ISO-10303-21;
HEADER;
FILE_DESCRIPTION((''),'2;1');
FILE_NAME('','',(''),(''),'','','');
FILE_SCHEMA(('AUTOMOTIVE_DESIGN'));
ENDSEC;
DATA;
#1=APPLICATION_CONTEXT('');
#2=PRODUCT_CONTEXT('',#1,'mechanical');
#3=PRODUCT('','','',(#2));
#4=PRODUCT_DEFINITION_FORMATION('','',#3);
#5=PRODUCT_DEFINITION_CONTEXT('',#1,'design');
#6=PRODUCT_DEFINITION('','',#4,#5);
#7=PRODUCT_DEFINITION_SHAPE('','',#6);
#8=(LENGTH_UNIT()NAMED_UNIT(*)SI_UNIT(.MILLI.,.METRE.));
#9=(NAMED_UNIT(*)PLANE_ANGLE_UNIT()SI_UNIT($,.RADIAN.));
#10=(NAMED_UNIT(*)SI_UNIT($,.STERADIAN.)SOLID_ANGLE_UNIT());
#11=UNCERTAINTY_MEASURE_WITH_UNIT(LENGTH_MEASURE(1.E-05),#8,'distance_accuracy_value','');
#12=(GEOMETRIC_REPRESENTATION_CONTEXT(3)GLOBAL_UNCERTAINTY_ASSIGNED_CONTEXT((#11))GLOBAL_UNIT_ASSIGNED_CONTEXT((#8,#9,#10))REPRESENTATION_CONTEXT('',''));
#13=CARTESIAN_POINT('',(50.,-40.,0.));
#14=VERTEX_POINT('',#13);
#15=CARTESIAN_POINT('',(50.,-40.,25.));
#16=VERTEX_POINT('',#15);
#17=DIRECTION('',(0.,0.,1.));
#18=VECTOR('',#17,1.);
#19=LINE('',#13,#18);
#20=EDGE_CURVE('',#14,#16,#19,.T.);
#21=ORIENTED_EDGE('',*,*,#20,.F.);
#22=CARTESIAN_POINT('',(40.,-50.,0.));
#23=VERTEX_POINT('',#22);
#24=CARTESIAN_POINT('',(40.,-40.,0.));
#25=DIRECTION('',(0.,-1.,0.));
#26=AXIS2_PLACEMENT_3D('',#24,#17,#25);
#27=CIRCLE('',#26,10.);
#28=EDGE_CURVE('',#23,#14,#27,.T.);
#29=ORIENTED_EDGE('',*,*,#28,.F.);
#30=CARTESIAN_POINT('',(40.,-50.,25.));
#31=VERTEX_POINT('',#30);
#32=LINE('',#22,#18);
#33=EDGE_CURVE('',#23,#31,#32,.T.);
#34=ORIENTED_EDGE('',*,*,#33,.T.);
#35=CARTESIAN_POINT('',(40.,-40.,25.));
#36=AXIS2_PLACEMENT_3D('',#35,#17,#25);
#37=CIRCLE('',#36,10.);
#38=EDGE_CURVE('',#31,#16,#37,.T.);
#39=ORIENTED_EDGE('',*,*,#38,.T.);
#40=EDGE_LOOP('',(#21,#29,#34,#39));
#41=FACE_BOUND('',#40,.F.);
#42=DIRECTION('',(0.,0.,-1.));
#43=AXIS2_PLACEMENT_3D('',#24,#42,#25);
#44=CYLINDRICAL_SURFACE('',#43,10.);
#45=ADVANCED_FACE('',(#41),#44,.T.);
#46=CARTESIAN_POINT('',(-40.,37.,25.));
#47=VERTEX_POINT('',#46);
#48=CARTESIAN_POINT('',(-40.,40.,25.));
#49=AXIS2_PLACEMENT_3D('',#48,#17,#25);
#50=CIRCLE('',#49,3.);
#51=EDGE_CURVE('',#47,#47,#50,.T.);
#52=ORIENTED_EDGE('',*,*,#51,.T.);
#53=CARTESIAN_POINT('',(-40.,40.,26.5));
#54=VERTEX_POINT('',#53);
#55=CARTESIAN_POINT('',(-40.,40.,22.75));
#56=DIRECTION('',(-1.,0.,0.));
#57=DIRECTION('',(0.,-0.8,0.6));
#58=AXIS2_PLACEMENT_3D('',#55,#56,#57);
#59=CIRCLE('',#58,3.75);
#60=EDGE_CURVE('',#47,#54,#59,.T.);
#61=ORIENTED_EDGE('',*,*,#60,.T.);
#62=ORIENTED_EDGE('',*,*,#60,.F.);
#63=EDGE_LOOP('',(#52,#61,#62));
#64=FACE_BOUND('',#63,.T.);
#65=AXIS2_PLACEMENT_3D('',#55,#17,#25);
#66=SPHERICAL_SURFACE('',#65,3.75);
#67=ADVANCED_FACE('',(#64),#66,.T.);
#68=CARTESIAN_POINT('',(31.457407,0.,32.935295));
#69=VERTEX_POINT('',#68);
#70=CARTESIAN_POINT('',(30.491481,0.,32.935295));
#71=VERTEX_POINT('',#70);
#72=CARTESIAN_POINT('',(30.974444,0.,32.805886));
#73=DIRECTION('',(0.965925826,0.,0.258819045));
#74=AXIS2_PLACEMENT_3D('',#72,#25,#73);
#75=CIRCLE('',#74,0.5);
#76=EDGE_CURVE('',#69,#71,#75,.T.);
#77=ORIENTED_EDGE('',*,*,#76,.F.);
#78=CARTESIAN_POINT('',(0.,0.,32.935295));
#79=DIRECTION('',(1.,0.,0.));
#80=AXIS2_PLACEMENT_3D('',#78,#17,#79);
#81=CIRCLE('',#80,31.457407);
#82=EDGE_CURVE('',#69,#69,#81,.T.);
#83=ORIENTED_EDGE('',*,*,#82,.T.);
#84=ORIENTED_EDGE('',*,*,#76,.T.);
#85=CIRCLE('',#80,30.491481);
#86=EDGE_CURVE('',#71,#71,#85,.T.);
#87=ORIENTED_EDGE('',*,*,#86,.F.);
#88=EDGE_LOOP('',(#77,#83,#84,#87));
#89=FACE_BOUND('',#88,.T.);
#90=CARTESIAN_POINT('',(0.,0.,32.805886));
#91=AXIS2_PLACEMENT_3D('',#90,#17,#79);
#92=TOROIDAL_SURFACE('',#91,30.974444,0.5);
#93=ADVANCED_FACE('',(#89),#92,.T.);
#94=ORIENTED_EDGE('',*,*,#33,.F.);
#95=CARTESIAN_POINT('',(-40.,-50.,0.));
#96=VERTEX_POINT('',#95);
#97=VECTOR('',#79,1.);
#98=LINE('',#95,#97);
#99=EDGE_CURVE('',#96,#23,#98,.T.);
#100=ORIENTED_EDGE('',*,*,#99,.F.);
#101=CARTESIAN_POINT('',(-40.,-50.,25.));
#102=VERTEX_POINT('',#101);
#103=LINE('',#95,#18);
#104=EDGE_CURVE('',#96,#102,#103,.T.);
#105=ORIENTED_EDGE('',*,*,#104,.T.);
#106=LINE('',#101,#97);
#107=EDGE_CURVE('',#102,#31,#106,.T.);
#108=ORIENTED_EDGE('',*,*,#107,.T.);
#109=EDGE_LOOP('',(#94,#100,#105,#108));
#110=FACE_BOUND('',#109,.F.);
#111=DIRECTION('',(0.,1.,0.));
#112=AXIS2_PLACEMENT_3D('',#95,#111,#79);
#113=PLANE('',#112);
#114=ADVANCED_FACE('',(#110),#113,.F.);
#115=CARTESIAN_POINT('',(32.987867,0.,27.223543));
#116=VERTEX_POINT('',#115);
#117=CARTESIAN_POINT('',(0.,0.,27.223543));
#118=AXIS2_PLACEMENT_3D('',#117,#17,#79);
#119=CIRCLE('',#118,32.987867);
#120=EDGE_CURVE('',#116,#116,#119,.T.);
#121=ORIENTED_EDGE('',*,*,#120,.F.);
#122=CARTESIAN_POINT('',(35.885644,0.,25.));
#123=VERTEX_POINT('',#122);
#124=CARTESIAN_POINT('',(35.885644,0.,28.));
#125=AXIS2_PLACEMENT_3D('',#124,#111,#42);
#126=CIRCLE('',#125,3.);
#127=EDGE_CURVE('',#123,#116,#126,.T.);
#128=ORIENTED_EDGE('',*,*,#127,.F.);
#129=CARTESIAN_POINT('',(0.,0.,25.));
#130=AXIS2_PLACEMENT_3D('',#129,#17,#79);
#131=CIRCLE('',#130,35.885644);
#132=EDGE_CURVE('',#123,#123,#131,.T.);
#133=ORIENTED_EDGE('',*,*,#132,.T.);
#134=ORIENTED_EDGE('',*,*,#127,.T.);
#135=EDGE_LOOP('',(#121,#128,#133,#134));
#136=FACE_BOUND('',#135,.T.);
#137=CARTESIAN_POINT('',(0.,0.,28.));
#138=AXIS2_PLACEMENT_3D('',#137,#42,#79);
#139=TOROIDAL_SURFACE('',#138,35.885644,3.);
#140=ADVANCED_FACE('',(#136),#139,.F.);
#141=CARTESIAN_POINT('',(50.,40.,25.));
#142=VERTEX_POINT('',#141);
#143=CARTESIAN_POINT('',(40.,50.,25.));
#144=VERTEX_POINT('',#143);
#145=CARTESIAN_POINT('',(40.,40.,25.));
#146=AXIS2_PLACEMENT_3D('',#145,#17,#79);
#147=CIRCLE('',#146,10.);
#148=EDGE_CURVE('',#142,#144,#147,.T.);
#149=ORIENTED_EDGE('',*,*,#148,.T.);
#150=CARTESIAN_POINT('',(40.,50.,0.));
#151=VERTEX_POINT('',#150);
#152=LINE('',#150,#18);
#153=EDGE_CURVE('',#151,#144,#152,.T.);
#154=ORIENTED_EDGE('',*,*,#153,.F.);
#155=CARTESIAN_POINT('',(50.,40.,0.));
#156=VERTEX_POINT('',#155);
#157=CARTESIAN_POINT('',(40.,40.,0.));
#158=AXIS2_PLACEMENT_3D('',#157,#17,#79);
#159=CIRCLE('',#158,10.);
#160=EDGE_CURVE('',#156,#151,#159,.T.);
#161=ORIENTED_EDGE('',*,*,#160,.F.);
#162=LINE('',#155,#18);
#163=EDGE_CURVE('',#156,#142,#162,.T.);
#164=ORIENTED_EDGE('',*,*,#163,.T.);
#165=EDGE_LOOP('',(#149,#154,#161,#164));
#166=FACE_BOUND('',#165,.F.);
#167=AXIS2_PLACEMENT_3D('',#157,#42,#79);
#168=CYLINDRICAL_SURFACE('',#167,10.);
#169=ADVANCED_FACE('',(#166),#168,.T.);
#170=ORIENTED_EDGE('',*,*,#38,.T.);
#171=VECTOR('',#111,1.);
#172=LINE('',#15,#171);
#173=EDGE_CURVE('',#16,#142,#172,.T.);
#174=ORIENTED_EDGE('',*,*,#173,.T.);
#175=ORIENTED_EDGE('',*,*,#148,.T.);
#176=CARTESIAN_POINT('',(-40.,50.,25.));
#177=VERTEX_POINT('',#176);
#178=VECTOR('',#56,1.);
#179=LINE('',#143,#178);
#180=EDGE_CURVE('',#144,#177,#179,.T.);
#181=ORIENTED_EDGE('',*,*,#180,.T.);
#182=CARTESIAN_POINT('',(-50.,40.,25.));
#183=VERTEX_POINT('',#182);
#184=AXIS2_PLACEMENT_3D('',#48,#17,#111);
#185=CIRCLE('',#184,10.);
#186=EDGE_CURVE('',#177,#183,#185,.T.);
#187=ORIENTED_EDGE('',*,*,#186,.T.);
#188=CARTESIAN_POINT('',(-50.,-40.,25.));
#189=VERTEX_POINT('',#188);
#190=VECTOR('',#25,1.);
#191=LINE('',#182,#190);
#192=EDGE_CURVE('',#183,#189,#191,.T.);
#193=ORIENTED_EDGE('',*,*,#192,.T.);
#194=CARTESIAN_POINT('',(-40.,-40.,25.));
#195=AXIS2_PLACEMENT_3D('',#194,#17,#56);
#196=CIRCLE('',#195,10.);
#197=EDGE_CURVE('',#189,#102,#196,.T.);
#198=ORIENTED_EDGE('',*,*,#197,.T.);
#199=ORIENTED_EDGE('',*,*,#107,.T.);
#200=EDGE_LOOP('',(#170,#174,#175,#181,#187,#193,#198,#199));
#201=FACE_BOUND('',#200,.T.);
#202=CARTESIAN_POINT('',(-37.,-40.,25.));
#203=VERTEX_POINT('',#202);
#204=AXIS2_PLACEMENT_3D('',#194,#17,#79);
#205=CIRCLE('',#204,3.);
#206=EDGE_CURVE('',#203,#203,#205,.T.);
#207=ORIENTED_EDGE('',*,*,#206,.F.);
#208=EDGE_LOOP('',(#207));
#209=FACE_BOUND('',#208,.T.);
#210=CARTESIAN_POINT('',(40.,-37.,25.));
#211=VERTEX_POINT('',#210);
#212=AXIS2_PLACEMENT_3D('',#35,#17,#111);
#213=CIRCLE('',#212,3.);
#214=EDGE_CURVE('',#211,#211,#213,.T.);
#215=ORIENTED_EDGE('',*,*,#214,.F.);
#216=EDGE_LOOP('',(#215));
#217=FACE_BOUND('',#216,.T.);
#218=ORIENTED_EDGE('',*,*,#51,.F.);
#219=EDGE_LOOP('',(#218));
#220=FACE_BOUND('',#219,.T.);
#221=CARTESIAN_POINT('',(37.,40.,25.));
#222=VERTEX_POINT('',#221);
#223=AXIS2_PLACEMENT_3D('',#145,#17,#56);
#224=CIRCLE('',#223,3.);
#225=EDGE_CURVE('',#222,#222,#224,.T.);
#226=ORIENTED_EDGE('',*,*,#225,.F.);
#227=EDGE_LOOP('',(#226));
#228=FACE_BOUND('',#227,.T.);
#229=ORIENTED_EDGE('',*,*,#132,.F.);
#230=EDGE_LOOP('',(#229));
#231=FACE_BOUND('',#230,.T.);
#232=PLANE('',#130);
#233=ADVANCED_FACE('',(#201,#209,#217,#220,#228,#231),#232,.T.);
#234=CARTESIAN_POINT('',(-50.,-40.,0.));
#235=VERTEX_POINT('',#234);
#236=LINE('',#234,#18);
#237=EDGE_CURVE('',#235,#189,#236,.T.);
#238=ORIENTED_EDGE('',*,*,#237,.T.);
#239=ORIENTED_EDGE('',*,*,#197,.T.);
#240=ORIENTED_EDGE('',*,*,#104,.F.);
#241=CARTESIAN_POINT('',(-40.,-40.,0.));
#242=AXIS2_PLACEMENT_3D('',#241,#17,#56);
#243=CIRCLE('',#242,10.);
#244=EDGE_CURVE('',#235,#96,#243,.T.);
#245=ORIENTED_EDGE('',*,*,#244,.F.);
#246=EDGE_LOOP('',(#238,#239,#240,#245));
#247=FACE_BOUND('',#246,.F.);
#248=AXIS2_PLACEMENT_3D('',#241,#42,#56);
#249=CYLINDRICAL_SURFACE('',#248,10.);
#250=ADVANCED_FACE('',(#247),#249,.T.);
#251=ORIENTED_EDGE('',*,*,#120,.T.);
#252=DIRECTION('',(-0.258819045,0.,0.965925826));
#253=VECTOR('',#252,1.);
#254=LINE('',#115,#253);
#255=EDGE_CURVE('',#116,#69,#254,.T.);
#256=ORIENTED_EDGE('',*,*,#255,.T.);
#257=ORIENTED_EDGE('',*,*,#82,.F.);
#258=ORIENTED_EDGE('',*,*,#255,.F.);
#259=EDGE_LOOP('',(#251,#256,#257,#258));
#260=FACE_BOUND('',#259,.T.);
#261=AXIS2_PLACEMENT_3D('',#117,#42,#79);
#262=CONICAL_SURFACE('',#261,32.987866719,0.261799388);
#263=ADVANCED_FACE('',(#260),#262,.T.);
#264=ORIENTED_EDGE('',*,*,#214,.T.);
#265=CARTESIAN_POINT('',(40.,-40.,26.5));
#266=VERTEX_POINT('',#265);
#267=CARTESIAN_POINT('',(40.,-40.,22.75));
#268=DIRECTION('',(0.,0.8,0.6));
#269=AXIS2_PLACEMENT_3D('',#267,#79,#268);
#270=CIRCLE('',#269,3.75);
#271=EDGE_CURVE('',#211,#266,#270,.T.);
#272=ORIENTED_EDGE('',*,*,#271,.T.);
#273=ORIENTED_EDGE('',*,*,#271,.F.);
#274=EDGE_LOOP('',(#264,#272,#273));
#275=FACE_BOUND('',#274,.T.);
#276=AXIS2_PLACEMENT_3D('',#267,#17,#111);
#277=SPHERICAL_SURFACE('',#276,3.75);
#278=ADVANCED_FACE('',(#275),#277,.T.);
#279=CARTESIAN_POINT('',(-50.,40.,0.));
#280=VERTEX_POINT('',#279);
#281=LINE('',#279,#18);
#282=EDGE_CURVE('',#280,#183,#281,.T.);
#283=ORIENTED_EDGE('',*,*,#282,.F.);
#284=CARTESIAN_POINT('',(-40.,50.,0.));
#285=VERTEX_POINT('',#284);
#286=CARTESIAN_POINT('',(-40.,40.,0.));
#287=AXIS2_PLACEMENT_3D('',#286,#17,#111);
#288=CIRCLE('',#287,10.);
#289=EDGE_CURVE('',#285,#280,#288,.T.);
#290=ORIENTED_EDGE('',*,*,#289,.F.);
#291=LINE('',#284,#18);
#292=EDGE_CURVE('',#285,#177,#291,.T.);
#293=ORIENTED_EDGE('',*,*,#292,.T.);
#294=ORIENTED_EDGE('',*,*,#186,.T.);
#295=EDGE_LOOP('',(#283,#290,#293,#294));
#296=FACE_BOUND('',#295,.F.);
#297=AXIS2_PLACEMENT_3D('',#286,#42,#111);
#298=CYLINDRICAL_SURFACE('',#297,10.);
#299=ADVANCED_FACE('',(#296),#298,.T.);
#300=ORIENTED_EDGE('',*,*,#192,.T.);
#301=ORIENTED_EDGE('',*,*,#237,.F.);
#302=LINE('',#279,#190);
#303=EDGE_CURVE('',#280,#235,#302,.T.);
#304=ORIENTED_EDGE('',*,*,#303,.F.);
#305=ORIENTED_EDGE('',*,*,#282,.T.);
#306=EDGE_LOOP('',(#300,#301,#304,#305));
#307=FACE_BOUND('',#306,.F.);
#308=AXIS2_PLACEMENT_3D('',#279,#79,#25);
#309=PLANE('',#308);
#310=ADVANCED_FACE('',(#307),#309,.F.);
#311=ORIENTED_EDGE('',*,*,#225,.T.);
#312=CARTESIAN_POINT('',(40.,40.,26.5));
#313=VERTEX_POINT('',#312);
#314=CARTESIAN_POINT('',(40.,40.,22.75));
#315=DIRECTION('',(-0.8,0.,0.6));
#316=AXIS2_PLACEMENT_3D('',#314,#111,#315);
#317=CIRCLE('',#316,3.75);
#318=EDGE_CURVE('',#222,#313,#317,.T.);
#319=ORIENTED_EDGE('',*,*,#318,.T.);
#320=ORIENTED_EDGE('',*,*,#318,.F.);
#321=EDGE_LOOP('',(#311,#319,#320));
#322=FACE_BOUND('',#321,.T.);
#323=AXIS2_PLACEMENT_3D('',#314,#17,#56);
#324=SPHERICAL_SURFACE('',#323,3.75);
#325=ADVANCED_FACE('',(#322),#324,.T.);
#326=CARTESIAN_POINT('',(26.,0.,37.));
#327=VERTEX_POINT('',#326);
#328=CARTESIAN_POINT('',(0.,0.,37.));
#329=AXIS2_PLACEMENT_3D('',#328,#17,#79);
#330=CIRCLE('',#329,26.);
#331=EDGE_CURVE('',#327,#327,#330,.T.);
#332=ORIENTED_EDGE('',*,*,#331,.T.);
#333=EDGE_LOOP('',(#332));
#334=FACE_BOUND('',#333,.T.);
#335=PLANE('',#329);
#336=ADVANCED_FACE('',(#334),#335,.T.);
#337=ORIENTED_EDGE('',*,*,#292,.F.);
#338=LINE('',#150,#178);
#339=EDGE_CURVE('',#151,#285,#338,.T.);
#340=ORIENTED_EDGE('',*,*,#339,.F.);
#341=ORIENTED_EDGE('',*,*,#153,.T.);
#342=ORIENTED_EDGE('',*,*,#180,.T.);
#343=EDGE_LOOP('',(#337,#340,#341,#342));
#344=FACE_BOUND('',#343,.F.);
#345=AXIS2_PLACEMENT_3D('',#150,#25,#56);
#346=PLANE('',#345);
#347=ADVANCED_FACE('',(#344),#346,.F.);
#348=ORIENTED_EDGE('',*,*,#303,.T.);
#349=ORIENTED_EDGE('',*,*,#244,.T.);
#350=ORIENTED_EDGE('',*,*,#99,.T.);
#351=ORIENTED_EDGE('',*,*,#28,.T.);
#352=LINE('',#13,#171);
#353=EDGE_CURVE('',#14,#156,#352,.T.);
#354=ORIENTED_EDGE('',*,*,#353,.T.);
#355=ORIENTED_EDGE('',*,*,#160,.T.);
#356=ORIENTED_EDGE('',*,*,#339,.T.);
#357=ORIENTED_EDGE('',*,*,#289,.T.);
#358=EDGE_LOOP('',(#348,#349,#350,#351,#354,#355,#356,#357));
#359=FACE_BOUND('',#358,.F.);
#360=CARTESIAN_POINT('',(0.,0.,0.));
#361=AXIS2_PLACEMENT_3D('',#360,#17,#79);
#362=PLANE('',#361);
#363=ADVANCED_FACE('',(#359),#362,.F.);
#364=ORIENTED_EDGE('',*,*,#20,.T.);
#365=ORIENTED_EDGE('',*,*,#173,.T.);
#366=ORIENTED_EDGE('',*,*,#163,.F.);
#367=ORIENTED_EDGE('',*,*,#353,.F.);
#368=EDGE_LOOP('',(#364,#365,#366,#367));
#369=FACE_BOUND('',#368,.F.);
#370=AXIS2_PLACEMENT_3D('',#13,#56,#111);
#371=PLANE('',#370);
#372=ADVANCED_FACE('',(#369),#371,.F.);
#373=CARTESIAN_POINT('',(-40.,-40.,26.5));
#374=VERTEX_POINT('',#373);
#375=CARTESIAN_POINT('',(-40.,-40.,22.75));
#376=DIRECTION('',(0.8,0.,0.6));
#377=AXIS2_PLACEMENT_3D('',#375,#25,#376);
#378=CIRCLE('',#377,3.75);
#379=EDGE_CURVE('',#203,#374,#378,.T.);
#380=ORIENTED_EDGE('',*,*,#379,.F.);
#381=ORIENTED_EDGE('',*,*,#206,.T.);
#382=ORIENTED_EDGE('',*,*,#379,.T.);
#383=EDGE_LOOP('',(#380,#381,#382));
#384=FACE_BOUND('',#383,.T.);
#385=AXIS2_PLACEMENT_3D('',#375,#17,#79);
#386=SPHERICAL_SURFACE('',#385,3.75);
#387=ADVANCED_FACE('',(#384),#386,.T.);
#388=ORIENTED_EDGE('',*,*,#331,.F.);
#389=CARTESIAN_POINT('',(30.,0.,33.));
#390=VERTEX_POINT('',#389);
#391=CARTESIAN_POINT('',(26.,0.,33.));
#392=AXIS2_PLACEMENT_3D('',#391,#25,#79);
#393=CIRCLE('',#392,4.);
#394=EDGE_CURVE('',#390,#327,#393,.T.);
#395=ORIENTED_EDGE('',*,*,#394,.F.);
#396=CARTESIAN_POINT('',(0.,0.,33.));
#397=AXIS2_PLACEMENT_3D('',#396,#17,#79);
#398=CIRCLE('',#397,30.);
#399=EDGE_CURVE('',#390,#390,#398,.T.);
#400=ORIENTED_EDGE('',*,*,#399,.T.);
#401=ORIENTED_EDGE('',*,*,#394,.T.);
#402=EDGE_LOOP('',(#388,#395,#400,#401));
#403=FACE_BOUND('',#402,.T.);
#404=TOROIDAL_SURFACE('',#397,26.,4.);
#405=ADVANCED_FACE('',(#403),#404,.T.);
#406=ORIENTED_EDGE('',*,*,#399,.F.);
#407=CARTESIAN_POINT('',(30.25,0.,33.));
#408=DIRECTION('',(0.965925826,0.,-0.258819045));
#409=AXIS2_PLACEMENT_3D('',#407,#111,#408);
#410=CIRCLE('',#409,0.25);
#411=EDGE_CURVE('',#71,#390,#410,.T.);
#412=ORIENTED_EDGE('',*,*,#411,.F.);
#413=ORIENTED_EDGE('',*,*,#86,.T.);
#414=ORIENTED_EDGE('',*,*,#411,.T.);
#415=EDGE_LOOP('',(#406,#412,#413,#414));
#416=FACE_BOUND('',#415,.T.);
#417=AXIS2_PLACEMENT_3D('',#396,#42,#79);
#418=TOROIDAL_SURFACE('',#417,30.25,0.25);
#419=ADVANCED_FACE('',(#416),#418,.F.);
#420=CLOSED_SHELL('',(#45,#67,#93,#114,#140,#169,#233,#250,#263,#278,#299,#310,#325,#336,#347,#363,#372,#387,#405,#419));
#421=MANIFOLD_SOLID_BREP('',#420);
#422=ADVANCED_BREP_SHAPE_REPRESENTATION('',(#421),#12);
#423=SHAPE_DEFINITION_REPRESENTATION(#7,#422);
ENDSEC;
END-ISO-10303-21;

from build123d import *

# Parameters (mm, degrees)
F1_DEPTH        = 25
F6_COPIES_COUNT = 4


# Not quite as in the source:
# - a pattern or mirror of a feature is missing from the dataset's text; its kind, count and spacing are read off the source's solid


with BuildPart() as f1:
    # F0 (on Top) → F1 (new body)
    with BuildSketch(Plane.XY):
        with BuildLine():
            ThreePointArc((50, 40), (47.0710678119, 47.0710678119), (40, 50))
            Line((40, 50), (-40, 50))
            ThreePointArc((-40, 50), (-47.0710678119, 47.0710678119), (-50, 40))
            Line((-50, 40), (-50, -40))
            ThreePointArc((-50, -40), (-47.0710678119, -47.0710678119), (-40, -50))
            Line((-40, -50), (40, -50))
            ThreePointArc((40, -50), (47.0710678119, -47.0710678119), (50, -40))
            Line((50, -40), (50, 40))
        make_face()
    extrude(amount=F1_DEPTH)

    # F2 (on Front) → F3 (revolve)
    with BuildSketch(Plane.XZ):
        with BuildLine():
            Line((26, 37), (0, 37))
            Line((0, 37), (0, 25))
            Line((0, 25), (35.8856441977, 25))
            ThreePointArc((35.8856441977, 25), (34.0593599107, 25.6199399791), (32.9878667188, 27.2235428647))
            Line((32.9878667188, 27.2235428647), (31.4574072829, 32.9352952387))
            ThreePointArc((31.4574072829, 32.9352952387), (30.9744443697, 33.3058857162), (30.4914814566, 32.9352952387))
            ThreePointArc((30.4914814566, 32.9352952387), (30.2173684519, 32.7521387847), (30, 33))
            ThreePointArc((30, 33), (28.8284271247, 35.8284271247), (26, 37))
        make_face()
    revolve(axis=Axis((0, 0, 32.0425145328), (0, 0, 1)))

    # F5 (on plane+point) → F6 (revolve)
    with BuildSketch(Plane.XZ.offset(40)):
        with BuildLine():
            Line((-40, 26.5), (-40, 25))
            Line((-40, 25), (-37, 25))
            ThreePointArc((-37, 25), (-38.3229490169, 26.1041019662), (-40, 26.5))
        make_face()
    f6 = revolve(axis=Axis((-40, -40, 31.9980286476), (0, 0, 1)))

    # F6_copies: F6 ×4 about axis
    f6_copies_axis = Axis((0, 0, 0), (0, 0, 1))
    for i in range(1, F6_COPIES_COUNT):
        add(f6.rotate(f6_copies_axis, i * 360 / F6_COPIES_COUNT))


solid = f1.part
